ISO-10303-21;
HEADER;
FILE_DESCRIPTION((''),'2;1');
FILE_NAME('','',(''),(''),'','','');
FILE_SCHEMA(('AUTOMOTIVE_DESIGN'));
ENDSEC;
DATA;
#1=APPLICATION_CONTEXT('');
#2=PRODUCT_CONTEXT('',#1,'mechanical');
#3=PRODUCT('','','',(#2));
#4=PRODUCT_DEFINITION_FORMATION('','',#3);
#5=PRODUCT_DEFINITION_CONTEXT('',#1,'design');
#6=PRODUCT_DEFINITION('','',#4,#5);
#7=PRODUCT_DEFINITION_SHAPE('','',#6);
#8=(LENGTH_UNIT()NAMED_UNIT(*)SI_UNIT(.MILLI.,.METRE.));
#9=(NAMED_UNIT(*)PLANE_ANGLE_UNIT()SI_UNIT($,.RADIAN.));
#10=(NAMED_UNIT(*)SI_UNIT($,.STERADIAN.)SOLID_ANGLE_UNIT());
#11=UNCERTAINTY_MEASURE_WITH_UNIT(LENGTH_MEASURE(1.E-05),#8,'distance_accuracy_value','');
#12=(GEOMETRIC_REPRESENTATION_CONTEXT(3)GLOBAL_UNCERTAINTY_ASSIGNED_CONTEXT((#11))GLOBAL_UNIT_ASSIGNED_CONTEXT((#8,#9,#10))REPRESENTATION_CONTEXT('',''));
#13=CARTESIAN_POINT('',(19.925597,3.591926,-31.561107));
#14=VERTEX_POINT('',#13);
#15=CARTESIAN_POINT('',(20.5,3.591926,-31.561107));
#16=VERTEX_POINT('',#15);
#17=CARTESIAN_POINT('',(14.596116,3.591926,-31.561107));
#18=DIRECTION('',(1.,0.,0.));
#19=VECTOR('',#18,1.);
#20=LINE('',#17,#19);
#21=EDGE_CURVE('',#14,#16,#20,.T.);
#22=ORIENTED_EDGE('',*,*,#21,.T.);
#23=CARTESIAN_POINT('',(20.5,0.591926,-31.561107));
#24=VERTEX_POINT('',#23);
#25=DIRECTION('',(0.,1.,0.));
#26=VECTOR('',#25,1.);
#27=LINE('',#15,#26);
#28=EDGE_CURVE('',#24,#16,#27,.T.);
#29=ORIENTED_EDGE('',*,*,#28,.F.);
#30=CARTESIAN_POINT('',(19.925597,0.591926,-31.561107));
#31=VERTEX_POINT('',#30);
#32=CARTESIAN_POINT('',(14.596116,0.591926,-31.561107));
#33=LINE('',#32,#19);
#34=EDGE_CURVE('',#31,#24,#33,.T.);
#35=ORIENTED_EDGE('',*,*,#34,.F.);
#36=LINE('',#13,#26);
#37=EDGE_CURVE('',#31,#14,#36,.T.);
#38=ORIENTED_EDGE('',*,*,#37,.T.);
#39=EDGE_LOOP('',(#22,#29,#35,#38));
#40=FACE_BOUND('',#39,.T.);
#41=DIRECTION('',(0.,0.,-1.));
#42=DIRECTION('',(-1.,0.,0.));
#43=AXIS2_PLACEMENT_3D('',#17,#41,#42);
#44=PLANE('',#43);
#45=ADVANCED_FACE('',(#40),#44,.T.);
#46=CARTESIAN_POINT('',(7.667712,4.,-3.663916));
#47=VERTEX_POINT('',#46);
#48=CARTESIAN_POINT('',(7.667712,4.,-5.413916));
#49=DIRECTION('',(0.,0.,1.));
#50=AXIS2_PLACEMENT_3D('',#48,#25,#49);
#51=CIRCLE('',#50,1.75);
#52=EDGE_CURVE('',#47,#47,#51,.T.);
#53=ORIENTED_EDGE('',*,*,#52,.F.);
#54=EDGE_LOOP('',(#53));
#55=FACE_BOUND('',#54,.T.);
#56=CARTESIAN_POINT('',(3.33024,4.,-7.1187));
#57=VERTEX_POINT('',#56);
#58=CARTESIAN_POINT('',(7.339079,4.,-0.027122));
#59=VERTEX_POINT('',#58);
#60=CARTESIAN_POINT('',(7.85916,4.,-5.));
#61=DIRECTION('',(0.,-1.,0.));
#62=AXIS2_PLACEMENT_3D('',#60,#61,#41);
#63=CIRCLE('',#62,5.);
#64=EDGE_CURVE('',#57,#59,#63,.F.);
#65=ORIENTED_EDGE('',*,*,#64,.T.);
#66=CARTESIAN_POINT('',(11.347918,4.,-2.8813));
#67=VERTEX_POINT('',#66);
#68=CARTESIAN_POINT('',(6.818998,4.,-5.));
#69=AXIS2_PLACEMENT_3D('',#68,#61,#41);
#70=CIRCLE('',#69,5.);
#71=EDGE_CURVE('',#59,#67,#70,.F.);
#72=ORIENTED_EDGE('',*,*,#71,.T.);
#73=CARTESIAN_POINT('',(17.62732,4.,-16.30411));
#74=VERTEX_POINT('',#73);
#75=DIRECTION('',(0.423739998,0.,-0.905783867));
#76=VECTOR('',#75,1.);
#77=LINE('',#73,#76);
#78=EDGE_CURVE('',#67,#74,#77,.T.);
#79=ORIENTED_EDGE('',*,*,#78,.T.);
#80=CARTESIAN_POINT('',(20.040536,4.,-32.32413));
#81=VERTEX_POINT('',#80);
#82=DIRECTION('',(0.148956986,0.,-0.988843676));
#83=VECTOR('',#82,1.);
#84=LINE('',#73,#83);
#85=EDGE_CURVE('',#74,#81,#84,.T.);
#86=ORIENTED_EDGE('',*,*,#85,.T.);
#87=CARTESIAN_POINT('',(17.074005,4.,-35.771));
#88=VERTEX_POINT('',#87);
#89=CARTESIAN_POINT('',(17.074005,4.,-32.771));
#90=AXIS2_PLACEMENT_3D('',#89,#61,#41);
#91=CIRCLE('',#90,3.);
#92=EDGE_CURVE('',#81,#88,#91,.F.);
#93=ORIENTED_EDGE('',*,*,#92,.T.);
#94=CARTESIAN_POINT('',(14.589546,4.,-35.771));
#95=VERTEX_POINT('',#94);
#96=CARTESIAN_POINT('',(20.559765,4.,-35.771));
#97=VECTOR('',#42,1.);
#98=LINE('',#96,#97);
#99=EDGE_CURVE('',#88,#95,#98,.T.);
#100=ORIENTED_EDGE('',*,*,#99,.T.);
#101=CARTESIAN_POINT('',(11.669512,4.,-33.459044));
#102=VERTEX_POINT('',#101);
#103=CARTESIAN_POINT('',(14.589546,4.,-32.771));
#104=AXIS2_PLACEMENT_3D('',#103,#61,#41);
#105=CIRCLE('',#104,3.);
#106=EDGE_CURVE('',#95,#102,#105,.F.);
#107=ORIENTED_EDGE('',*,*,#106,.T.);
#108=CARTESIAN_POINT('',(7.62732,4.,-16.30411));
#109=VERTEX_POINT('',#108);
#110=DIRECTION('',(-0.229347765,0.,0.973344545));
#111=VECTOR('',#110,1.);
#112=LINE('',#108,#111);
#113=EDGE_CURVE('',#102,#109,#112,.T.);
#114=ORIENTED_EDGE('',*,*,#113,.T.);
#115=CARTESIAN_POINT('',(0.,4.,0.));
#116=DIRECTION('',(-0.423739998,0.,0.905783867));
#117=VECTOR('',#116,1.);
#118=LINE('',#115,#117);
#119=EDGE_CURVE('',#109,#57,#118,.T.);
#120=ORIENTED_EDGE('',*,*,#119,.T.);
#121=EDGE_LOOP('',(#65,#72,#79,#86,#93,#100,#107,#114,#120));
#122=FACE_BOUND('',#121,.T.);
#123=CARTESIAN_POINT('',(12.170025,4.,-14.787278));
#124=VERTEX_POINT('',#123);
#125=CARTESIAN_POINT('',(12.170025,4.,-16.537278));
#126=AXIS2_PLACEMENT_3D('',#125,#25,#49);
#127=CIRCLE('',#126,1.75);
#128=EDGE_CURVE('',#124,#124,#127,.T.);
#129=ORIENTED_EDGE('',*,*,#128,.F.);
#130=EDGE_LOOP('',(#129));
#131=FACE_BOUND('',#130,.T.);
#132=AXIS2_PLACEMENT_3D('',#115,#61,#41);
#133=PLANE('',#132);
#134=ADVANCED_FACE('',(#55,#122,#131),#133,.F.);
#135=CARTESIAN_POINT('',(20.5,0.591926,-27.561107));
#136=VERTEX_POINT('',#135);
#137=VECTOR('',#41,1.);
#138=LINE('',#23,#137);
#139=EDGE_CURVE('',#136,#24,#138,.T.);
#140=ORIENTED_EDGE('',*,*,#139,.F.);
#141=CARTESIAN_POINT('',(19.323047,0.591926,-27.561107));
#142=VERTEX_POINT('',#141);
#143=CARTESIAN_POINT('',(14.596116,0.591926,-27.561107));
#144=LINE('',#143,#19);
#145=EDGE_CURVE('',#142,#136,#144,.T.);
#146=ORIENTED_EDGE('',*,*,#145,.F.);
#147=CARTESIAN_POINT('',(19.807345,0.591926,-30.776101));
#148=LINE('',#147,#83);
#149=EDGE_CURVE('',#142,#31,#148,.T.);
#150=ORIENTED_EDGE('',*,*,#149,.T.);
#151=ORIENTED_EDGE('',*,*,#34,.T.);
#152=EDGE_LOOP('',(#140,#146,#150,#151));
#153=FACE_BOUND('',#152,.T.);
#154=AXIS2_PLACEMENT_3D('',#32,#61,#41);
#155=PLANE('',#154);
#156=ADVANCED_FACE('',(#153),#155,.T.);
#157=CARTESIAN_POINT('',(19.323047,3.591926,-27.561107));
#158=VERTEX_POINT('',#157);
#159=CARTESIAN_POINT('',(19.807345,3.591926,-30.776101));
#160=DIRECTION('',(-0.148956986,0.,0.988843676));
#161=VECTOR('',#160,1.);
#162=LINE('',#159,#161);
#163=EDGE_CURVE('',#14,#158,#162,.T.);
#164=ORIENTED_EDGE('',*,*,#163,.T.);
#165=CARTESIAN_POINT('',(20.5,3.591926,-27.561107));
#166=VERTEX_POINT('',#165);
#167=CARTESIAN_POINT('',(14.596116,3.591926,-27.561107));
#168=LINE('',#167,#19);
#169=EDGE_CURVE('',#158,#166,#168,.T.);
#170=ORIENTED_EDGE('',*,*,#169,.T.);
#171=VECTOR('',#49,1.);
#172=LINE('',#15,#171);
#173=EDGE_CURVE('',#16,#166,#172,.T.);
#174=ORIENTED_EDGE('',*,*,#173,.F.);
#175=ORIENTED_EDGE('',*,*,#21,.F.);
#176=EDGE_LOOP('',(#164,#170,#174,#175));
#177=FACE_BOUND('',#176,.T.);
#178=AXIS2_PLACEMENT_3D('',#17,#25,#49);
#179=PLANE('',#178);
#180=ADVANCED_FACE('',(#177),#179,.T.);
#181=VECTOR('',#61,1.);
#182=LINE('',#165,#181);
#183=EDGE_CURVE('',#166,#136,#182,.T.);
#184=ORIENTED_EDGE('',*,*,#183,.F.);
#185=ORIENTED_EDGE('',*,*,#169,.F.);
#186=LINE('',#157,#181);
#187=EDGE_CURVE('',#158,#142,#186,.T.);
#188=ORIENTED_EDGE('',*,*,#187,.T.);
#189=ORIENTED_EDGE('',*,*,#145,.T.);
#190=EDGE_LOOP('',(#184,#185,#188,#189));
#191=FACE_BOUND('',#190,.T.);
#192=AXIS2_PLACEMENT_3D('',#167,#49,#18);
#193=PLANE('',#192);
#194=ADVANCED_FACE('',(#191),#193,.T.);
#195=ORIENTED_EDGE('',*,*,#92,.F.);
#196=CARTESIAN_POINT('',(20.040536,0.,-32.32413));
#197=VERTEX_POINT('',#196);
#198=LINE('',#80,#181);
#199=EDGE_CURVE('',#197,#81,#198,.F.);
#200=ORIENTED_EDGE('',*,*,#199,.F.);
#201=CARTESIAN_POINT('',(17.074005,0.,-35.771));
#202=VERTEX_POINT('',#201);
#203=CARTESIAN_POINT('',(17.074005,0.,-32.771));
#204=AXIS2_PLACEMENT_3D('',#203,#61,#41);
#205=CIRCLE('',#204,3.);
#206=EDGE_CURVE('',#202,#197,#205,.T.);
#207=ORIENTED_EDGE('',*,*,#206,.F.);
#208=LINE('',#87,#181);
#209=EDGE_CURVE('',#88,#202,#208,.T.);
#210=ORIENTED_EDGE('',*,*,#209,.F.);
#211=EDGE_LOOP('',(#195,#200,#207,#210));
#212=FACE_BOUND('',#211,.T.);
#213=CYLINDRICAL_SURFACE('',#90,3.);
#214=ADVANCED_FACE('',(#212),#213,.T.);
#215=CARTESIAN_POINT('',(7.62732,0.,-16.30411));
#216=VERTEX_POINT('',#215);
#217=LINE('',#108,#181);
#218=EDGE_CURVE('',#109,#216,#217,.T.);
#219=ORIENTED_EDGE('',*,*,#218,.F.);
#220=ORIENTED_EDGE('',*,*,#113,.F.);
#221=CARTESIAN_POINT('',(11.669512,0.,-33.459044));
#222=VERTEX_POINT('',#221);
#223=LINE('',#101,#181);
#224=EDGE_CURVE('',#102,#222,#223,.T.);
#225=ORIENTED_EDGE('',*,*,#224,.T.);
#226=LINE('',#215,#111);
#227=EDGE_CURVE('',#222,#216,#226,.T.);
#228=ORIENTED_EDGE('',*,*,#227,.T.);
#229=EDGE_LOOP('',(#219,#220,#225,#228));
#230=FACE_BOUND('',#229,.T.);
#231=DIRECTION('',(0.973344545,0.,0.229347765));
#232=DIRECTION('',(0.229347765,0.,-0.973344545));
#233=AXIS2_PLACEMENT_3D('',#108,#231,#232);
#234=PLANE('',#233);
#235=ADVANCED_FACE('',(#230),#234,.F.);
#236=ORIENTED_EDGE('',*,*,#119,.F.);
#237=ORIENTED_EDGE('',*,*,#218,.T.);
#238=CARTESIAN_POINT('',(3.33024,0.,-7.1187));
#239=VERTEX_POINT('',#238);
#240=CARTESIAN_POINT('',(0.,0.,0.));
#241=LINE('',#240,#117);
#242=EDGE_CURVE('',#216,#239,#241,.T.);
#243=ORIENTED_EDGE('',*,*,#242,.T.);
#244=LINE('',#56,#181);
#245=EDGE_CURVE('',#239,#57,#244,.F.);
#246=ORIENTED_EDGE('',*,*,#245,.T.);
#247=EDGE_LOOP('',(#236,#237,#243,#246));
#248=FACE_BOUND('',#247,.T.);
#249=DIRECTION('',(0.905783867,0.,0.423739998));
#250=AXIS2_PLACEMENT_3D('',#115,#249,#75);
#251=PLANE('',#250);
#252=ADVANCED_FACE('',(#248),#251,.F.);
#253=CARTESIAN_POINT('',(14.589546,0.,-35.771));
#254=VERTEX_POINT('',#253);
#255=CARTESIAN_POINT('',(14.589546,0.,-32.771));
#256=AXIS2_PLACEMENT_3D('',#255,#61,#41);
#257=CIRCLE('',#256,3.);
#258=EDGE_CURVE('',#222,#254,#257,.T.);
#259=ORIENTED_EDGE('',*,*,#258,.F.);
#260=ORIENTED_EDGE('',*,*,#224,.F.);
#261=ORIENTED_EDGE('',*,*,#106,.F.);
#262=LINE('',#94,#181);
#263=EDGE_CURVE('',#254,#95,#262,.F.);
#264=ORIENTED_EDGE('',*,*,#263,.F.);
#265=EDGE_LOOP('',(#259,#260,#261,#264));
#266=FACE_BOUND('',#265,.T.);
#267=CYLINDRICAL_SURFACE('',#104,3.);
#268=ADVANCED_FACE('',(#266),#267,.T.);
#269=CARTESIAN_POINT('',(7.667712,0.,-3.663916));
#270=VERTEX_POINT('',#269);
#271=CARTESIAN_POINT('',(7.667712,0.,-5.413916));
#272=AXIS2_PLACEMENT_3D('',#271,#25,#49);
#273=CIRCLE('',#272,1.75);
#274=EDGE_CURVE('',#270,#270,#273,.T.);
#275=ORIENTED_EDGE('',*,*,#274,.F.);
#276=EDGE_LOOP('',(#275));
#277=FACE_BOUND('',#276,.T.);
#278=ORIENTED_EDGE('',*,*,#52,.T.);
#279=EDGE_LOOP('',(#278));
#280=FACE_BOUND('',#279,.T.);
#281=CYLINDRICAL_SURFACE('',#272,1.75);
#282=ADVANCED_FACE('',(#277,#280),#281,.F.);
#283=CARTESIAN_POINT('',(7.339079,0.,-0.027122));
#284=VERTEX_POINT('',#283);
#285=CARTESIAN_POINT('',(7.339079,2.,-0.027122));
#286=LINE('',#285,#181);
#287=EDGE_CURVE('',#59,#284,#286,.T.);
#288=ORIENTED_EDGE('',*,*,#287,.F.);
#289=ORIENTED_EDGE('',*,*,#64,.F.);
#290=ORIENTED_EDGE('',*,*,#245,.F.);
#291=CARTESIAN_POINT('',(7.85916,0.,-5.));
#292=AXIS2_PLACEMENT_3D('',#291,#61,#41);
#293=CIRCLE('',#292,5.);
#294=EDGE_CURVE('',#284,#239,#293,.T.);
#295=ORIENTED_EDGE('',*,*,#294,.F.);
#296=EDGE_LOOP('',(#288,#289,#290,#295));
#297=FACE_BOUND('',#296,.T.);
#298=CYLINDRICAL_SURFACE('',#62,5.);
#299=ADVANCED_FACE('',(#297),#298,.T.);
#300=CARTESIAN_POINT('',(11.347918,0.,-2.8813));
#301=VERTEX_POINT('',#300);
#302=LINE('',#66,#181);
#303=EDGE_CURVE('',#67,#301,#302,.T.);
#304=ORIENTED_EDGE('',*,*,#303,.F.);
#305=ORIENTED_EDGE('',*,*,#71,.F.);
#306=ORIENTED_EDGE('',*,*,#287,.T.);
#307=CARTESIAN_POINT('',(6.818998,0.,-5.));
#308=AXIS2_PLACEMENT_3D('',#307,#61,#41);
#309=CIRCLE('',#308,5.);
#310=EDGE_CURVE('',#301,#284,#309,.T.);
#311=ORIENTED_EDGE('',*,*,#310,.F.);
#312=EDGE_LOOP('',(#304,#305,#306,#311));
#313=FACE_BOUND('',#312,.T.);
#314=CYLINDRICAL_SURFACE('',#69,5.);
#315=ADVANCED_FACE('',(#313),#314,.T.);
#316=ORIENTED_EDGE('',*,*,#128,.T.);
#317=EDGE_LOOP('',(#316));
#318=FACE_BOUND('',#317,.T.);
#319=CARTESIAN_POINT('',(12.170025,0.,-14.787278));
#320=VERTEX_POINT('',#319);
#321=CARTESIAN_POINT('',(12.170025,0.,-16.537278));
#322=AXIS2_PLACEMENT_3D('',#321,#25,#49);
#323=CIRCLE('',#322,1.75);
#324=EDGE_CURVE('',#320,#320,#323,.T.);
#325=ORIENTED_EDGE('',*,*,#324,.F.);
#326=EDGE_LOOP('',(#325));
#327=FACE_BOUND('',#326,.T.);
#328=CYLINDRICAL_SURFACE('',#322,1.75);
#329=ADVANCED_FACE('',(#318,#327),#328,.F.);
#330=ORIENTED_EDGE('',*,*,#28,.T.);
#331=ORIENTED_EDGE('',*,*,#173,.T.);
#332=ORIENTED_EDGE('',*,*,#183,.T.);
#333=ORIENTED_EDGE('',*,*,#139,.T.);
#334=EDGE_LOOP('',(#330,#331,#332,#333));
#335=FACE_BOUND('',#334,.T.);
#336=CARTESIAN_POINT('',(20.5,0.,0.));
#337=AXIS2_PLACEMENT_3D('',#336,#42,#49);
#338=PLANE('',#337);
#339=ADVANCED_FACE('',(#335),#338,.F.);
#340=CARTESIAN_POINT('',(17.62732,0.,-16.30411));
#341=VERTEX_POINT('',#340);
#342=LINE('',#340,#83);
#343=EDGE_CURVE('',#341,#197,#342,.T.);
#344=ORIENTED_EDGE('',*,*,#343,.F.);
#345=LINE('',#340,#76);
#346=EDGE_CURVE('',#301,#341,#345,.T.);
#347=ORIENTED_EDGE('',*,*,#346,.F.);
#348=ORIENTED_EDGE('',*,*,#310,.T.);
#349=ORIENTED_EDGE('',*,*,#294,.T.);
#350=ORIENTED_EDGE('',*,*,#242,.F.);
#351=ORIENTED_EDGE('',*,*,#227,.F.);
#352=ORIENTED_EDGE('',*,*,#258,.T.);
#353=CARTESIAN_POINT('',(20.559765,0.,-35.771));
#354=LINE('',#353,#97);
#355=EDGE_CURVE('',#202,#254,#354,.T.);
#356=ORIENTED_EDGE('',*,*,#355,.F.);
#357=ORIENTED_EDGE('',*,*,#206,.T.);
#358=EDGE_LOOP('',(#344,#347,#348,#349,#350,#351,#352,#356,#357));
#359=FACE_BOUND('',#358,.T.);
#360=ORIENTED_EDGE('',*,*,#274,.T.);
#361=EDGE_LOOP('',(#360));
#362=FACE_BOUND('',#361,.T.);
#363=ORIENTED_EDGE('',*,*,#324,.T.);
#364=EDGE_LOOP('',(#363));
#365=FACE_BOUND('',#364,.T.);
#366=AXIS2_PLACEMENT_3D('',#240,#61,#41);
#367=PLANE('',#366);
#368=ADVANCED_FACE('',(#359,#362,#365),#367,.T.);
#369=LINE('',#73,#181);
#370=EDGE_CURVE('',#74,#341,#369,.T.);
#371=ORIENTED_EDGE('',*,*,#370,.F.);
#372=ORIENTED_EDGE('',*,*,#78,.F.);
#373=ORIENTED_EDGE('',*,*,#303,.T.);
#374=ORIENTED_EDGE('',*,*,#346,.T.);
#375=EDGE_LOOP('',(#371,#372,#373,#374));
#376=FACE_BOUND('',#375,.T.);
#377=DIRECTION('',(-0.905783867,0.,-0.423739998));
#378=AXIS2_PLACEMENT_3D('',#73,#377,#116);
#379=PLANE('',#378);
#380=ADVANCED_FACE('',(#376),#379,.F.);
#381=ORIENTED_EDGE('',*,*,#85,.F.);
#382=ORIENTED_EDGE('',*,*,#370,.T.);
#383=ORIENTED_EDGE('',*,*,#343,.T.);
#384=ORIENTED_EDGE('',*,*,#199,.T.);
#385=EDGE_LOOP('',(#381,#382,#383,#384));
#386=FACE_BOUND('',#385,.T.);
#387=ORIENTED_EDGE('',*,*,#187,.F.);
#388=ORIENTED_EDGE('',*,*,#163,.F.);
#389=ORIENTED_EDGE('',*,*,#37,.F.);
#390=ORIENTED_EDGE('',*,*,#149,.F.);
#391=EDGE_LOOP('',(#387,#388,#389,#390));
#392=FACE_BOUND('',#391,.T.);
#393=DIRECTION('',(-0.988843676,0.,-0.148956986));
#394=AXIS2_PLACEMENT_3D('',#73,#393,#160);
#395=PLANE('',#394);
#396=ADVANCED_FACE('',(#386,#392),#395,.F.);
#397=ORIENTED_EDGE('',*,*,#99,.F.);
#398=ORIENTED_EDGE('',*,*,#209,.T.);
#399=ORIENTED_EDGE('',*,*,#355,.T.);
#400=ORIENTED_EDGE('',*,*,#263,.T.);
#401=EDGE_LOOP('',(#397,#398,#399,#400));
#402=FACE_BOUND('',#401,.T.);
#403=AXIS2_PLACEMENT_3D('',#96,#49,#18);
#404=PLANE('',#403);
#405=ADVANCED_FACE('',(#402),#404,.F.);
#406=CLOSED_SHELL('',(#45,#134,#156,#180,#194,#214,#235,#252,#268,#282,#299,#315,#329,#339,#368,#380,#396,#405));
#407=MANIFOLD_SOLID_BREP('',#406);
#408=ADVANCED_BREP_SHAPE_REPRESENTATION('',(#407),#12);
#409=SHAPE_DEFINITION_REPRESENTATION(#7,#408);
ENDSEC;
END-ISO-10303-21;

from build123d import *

# Parameters (mm, degrees)
BOSS_EXTRUDE1_DEPTH = 4
FILLET1_R           = 5
FILLET2_R           = 3
SKETCH2_R           = 1.75
CUT_EXTRUDE1_DEPTH  = 42.213228115
BOSS_EXTRUDE2_REACH = 42.084
SKETCH4_W           = 4
SKETCH4_H           = 3


with BuildPart() as part:
    # Sketch1 → Boss-Extrude1 (new body)
    with BuildSketch(Plane(origin=(0, 0, 0), x_dir=(1, 0, 0), z_dir=(0, 1, 0))):
        Polygon((0, 0), (7.627319971, 16.304109607), (12.214275277, 35.771000499), (20.559764671, 35.771000499), (17.627319971, 16.304109607), (10, 0), align=None)
    extrude(amount=BOSS_EXTRUDE1_DEPTH)

    # Fillet1
    # the kernel refuses this fillet: 5 mm, written as the material it takes off along each edge
    with BuildSketch(Plane(origin=(10, -7.952504215, 0), x_dir=(0.42373999836860227, 0, -0.9057838670359375), z_dir=(0, 1, 0))) as fillet1_piece_1:
        with BuildLine():
            CenterArc((FILLET1_R * 0.636200337192, FILLET1_R), FILLET1_R, 205.070935448, 64.929064552)
            Line((-FILLET1_R * 0.269583529844, FILLET1_R * 0.576260001631), (0, 0))
            Line((0, 0), (FILLET1_R * 0.636200337192, 0))
        make_face()
    extrude(amount=19.90500843, mode=Mode.SUBTRACT)
    with BuildSketch(Plane(origin=(0, -19.647899049, 0), x_dir=(0.42373999836860193, 0, -0.9057838670359376), z_dir=(0, 1, 0))) as fillet1_piece_2:
        with BuildLine():
            CenterArc((FILLET1_R * 1.57183192391, -FILLET1_R), FILLET1_R, 90, 115.070935448)
            Line((FILLET1_R * 0.666048056873, -FILLET1_R * 1.42373999837), (0, 0))
            Line((0, 0), (FILLET1_R * 1.57183192391, 0))
        make_face()
    extrude(amount=43.295798098, mode=Mode.SUBTRACT)

    # Fillet2
    fillet2_edges = [part.edges().sort_by_distance(p)[0] for p in [
        (12.214275277, 2, -35.771000499),
        (20.559764671, 2, -35.771000499),
    ]]
    fillet(fillet2_edges, radius=FILLET2_R)

    # Sketch2 → Cut-Extrude1 (cut, through all)
    with BuildSketch(Plane(origin=(0, 4, 0), x_dir=(1, 0, 0), z_dir=(0, 1, 0))):
        with Locations(Location((7.667711585, 5.413915862, 0), (0, 0, 270))):
            Circle(SKETCH2_R)
        with Locations(Location((12.170024678, 16.537277621, 0), (0, 0, 270))):
            Circle(SKETCH2_R)
    extrude(amount=-CUT_EXTRUDE1_DEPTH, mode=Mode.SUBTRACT)

    # Boss-Extrude2: up to this plane
    boss_extrude2_end = Plane(origin=(17.627319971, 4, -16.304109607), z_dir=(-0.9888436763539994, 0, -0.1489569861896618))
    # Sketch4 → Boss-Extrude2 (add, up to the surface)
    with BuildSketch(Plane(origin=(20.5, 0, 0), x_dir=(0, 0, -1), z_dir=(1, 0, 0)), mode=Mode.PRIVATE) as boss_extrude2_sk1:
        with Locations((29.561107497, 2.091926215)):
            Rectangle(SKETCH4_W, SKETCH4_H)
    boss_extrude2_tool1 = split(extrude(boss_extrude2_sk1.sketch, amount=-BOSS_EXTRUDE2_REACH, mode=Mode.PRIVATE), bisect_by=boss_extrude2_end, keep=Keep.BOTH, mode=Mode.PRIVATE)
    add(boss_extrude2_tool1.solids().sort_by_distance((20.5, 2.091926, -29.561107))[0])


solid = part.part
